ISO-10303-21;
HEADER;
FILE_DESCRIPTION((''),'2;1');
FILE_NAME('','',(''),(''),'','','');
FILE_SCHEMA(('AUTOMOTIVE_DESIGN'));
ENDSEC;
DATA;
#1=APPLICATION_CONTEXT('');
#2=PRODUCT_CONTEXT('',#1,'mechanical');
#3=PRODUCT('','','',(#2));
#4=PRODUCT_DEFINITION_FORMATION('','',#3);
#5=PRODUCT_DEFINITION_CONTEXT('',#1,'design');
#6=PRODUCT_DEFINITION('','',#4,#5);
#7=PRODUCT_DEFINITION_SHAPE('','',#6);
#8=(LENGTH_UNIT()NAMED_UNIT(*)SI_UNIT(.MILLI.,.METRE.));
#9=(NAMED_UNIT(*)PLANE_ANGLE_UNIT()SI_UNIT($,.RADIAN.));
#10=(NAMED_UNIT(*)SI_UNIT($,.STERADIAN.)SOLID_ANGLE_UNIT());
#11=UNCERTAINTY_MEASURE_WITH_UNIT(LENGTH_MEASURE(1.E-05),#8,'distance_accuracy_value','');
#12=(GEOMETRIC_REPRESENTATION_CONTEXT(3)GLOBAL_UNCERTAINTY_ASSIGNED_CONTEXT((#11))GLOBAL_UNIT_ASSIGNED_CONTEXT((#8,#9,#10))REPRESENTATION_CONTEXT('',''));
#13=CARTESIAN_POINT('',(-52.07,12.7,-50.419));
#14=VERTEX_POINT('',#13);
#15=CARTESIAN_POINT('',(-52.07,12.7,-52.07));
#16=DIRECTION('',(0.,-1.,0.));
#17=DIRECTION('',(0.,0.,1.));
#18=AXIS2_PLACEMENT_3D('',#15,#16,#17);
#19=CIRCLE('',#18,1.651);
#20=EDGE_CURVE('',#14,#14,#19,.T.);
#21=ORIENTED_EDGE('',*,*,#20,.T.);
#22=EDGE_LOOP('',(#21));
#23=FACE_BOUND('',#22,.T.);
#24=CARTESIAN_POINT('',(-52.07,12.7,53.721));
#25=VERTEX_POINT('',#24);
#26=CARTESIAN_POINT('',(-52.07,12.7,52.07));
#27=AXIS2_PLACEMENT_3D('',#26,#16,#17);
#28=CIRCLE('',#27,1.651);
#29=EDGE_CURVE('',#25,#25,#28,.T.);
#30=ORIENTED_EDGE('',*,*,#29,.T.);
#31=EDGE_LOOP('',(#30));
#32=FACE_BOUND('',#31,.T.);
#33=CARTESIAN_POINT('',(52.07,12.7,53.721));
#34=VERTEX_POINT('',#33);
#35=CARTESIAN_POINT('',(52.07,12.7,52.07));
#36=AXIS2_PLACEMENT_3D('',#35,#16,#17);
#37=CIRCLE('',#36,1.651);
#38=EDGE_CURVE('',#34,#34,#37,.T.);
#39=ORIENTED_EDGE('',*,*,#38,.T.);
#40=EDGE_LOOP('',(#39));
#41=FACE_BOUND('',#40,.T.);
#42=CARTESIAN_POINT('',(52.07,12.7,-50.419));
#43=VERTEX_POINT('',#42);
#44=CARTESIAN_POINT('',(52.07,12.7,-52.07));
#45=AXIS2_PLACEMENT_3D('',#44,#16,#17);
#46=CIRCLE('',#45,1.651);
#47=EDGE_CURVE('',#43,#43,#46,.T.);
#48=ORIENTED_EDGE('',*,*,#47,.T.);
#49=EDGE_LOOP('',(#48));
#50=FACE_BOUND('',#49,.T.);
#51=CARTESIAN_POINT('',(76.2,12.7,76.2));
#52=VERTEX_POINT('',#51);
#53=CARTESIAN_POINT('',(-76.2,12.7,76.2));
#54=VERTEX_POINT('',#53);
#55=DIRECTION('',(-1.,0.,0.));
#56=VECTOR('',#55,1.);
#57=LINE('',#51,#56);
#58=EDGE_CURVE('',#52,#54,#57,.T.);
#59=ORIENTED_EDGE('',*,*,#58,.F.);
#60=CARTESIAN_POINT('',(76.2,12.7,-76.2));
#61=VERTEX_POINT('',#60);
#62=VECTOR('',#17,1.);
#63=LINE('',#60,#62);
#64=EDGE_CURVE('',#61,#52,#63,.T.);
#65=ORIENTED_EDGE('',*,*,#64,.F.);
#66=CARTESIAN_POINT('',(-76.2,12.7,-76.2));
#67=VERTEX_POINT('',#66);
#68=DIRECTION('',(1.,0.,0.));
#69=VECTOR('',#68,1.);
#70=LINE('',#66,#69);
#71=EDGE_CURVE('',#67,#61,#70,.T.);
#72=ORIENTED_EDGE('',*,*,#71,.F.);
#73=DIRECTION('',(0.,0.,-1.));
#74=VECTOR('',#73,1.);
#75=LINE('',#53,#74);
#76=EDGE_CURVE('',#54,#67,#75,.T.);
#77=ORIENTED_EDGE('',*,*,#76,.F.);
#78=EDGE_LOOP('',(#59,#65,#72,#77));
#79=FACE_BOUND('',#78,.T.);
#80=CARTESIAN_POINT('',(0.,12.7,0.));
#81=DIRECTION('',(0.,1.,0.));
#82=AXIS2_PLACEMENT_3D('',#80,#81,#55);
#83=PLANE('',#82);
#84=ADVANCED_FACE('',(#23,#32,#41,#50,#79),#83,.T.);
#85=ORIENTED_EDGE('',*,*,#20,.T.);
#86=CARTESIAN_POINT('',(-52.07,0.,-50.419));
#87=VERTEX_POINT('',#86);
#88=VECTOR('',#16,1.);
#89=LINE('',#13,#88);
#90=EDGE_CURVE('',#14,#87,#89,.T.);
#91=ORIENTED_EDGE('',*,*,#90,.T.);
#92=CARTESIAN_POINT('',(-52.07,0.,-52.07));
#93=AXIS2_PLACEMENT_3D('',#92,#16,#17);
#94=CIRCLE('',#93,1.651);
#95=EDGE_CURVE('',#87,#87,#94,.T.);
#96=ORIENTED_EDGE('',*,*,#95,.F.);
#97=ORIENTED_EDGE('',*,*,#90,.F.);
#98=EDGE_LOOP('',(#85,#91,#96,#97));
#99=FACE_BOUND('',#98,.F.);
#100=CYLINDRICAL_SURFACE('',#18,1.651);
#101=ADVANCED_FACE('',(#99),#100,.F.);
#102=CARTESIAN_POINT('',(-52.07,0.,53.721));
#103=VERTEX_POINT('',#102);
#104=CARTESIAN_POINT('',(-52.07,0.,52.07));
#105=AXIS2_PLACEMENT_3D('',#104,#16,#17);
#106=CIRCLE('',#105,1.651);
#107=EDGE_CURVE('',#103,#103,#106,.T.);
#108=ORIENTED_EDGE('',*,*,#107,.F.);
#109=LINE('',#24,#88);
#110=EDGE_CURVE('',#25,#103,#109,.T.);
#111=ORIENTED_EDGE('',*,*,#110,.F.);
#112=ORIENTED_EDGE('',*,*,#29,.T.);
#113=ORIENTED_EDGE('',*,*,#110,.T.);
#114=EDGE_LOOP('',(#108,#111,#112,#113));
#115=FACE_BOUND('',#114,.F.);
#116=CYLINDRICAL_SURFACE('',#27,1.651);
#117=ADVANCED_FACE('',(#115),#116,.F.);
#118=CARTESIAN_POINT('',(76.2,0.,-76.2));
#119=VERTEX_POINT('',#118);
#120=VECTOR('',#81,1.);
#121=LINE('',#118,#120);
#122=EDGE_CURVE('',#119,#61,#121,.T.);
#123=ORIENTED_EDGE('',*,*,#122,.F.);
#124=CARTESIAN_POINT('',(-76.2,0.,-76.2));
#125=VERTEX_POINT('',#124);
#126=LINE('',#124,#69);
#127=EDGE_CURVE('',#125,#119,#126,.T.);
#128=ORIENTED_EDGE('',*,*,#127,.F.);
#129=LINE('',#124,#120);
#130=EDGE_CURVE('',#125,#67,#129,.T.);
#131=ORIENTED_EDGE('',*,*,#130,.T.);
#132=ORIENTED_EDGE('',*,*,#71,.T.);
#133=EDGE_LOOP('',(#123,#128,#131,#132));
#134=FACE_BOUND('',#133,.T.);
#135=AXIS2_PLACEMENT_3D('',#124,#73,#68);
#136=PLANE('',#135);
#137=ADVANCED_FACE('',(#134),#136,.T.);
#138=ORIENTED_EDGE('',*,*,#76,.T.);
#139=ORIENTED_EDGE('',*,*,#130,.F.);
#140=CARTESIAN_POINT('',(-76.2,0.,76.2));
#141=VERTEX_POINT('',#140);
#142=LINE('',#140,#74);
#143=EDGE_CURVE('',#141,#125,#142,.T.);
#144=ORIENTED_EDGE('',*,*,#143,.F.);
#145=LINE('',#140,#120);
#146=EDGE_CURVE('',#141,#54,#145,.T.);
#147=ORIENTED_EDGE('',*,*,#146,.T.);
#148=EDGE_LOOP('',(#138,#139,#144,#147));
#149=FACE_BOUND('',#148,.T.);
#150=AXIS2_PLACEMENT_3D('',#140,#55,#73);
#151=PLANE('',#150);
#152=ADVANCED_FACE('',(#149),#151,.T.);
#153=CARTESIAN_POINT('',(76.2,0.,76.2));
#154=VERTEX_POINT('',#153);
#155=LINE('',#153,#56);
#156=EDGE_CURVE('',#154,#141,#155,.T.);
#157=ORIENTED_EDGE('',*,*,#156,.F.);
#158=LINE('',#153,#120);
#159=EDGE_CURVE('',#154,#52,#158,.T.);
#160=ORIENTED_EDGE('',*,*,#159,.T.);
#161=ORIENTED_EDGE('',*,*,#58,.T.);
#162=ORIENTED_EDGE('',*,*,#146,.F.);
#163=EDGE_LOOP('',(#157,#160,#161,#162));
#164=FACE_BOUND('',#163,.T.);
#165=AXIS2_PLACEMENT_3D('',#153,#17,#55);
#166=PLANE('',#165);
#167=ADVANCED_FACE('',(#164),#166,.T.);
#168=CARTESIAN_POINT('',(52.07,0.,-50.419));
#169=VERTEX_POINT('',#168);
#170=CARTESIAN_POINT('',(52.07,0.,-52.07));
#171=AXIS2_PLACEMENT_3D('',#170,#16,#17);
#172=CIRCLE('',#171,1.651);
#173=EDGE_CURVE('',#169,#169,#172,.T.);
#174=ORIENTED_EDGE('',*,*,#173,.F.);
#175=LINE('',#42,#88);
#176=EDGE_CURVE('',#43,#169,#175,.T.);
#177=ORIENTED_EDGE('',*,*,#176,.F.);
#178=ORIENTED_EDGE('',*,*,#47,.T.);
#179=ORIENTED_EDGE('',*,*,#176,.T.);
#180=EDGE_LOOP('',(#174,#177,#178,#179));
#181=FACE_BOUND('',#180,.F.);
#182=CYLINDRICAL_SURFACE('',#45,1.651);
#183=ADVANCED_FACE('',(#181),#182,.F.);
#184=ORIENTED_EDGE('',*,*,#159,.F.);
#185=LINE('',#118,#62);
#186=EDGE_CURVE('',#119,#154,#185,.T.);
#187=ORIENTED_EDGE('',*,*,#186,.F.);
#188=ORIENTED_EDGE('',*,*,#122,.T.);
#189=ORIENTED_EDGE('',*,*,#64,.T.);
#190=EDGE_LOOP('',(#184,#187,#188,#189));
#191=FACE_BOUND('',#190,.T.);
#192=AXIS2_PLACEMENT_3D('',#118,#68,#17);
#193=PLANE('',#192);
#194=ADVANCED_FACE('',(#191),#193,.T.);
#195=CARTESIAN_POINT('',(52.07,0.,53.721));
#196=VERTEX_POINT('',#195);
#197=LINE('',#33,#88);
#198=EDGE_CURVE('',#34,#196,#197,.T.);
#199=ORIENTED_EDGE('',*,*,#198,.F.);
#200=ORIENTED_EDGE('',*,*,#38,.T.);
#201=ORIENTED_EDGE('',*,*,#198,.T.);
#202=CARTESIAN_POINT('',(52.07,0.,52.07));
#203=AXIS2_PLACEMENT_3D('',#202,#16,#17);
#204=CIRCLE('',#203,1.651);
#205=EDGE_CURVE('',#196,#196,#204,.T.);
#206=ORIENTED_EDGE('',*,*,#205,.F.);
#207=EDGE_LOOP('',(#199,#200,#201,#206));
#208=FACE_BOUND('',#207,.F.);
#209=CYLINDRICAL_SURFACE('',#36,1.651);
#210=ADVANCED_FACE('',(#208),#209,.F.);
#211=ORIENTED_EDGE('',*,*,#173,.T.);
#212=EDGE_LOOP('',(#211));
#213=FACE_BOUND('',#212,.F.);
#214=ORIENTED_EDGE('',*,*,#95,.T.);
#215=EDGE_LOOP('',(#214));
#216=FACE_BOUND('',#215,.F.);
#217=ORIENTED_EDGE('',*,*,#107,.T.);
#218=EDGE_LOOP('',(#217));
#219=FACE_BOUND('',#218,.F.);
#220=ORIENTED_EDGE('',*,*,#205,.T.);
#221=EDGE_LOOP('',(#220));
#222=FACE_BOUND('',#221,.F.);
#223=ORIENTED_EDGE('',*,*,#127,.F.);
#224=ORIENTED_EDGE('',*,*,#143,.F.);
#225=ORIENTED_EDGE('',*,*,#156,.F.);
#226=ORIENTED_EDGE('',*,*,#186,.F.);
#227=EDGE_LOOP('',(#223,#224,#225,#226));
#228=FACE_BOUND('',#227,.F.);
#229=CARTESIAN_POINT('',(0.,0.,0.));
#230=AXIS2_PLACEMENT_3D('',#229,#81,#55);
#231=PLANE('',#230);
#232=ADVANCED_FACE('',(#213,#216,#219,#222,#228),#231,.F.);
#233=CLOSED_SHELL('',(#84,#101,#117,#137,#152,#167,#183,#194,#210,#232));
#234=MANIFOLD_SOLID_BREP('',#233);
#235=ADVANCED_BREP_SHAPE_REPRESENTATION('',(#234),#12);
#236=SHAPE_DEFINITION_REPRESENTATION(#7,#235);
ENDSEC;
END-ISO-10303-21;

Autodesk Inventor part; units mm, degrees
ref_plane "YZ Plane" through (0, 0, 0) normal (1, 0, 0) x (0, 1, 0)
ref_plane "XZ Plane" through (0, 0, 0) normal (0, 1, 0) x (-1, 0, 0)
ref_plane "XY Plane" through (0, 0, 0) normal (0, 0, 1) x (1, 0, 0)
sketch "Sketch1" plane through (0, 0, 0) normal (0, 1, 0) x (-1, 0, 0)
  line L0 (76.2, -76.2) -> (-76.2, -76.2)
  line L1 (-76.2, -76.2) -> (-76.2, 76.2)
  line L2 (-76.2, 76.2) -> (76.2, 76.2)
  line L3 (76.2, 76.2) -> (76.2, -76.2)
  point P0 (0, 0)
  point P1 (-76.2, 0)
  point P2 (0, -76.2)
  dimension "d0" = 152.4
  dimension "d1" = 152.4
extrude "Extrusion1" add sketch "Sketch1" along normal blind 12.7
sketch "Sketch3" plane through (0, 12.7, 0) normal (0, 1, 0) x (1, 0, 0)
  line L0 (-57.15, 57.15) -> (57.15, 57.15)
  line L1 (57.15, 57.15) -> (57.15, -57.15)
  line L2 (57.15, -57.15) -> (-57.15, -57.15)
  line L3 (-57.15, -57.15) -> (-57.15, 57.15)
  point P0 (0, 0)
  point P1 (-57.15, 0)
  point P2 (0, 57.15)
  point P3 (-52.07, 52.07)
  point P4 (52.07, 52.07)
  point P5 (52.07, -52.07)
  point P6 (-52.07, -52.07)
  dimension "d17" = 114.3
  dimension "d18" = 114.3
  dimension "d26" = 5.08
  dimension "d27" = 5.08
  dimension "d28" = 5.08
  dimension "d29" = 5.08
  dimension "d30" = 5.08
  dimension "d31" = 5.08
  dimension "d32" = 5.08
  dimension "d33" = 5.08
hole "Hole1" at (-52.07, 12.7, -52.07) at (52.07, 12.7, -52.07) at (52.07, 12.7, 52.07) at (-52.07, 12.7, 52.07) direction (0, -1, 0) diameter 3.302 end through all thread size "8-32 UNC" class "2B" standard "ANSI Unified Screw Threads"
sketch "Sketch4" plane through (0, 12.7, 0) normal (0, 1, 0) x (1, 0, 0)
  line L0 (-55.5625, 55.4863) -> (58.7375, 55.4863)
  line L1 (58.7375, 55.4863) -> (58.7375, -58.8137)
  line L2 (58.7375, -58.8137) -> (-55.5625, -58.8137)
  line L3 (-55.5625, -58.8137) -> (-55.5625, 55.4863)
  line L4 (-30.1625, -52.4129) -> (23.1775, -52.4129)
  line L5 (23.1775, -52.4129) -> (23.1775, 49.1871)
  line L6 (23.1775, 49.1871) -> (-30.1625, 49.1871)
  line L7 (-30.1625, 49.1871) -> (-30.1625, -52.4129)
  circle A0 centre (-27.6225, -37.1729) radius 1.5875
  circle A1 centre (20.6375, -38.4429) radius 1.5875
  circle A2 centre (20.6375, 44.1071) radius 1.5875
  circle A3 centre (-27.6225, 37.7571) radius 1.5875
  point P0 (0, 0)
  dimension "d34" = 114.3
  dimension "d35" = 114.3
  dimension "d36" = 53.34
  dimension "d37" = 101.6
  dimension "d38" = 3.175
  dimension "d39" = 15.24
  dimension "d40" = 2.54
  dimension "d41" = 2.54
  dimension "d42" = 13.97
  dimension "d43" = 96.52
  dimension "d44" = 2.54
  dimension "d45" = 90.17
  dimension "d46" = 2.54
  dimension "d47" = 25.4
  dimension "d70" = 6.4008
hole "Hole2" [suppressed]
sketch "Sketch7" plane through (0, 0, 0) normal (0, -1, 0) x (1, 0, 0)
  circle A0 centre (-27.6225, 37.1729) radius 3.3782 projected
  circle A1 centre (-27.6225, 37.1729) radius 6.35
  circle A2 centre (20.6375, 38.4429) radius 3.3782 projected
  circle A3 centre (20.6375, 38.4429) radius 6.35
  circle A4 centre (20.6375, -44.1071) radius 3.3782 projected
  circle A5 centre (20.6375, -44.1071) radius 6.35
  circle A6 centre (-27.6225, -37.7571) radius 3.3782 projected
  circle A7 centre (-27.6225, -37.7571) radius 6.35
  point P0 (0, 0)
  dimension "d63" = 12.7
  dimension "d64" = 12.7
  dimension "d65" = 12.7
  dimension "d66" = 12.7
extrude "Extrusion3" [suppressed]
properties part number "BasePlate" material "Aluminum 6061"
